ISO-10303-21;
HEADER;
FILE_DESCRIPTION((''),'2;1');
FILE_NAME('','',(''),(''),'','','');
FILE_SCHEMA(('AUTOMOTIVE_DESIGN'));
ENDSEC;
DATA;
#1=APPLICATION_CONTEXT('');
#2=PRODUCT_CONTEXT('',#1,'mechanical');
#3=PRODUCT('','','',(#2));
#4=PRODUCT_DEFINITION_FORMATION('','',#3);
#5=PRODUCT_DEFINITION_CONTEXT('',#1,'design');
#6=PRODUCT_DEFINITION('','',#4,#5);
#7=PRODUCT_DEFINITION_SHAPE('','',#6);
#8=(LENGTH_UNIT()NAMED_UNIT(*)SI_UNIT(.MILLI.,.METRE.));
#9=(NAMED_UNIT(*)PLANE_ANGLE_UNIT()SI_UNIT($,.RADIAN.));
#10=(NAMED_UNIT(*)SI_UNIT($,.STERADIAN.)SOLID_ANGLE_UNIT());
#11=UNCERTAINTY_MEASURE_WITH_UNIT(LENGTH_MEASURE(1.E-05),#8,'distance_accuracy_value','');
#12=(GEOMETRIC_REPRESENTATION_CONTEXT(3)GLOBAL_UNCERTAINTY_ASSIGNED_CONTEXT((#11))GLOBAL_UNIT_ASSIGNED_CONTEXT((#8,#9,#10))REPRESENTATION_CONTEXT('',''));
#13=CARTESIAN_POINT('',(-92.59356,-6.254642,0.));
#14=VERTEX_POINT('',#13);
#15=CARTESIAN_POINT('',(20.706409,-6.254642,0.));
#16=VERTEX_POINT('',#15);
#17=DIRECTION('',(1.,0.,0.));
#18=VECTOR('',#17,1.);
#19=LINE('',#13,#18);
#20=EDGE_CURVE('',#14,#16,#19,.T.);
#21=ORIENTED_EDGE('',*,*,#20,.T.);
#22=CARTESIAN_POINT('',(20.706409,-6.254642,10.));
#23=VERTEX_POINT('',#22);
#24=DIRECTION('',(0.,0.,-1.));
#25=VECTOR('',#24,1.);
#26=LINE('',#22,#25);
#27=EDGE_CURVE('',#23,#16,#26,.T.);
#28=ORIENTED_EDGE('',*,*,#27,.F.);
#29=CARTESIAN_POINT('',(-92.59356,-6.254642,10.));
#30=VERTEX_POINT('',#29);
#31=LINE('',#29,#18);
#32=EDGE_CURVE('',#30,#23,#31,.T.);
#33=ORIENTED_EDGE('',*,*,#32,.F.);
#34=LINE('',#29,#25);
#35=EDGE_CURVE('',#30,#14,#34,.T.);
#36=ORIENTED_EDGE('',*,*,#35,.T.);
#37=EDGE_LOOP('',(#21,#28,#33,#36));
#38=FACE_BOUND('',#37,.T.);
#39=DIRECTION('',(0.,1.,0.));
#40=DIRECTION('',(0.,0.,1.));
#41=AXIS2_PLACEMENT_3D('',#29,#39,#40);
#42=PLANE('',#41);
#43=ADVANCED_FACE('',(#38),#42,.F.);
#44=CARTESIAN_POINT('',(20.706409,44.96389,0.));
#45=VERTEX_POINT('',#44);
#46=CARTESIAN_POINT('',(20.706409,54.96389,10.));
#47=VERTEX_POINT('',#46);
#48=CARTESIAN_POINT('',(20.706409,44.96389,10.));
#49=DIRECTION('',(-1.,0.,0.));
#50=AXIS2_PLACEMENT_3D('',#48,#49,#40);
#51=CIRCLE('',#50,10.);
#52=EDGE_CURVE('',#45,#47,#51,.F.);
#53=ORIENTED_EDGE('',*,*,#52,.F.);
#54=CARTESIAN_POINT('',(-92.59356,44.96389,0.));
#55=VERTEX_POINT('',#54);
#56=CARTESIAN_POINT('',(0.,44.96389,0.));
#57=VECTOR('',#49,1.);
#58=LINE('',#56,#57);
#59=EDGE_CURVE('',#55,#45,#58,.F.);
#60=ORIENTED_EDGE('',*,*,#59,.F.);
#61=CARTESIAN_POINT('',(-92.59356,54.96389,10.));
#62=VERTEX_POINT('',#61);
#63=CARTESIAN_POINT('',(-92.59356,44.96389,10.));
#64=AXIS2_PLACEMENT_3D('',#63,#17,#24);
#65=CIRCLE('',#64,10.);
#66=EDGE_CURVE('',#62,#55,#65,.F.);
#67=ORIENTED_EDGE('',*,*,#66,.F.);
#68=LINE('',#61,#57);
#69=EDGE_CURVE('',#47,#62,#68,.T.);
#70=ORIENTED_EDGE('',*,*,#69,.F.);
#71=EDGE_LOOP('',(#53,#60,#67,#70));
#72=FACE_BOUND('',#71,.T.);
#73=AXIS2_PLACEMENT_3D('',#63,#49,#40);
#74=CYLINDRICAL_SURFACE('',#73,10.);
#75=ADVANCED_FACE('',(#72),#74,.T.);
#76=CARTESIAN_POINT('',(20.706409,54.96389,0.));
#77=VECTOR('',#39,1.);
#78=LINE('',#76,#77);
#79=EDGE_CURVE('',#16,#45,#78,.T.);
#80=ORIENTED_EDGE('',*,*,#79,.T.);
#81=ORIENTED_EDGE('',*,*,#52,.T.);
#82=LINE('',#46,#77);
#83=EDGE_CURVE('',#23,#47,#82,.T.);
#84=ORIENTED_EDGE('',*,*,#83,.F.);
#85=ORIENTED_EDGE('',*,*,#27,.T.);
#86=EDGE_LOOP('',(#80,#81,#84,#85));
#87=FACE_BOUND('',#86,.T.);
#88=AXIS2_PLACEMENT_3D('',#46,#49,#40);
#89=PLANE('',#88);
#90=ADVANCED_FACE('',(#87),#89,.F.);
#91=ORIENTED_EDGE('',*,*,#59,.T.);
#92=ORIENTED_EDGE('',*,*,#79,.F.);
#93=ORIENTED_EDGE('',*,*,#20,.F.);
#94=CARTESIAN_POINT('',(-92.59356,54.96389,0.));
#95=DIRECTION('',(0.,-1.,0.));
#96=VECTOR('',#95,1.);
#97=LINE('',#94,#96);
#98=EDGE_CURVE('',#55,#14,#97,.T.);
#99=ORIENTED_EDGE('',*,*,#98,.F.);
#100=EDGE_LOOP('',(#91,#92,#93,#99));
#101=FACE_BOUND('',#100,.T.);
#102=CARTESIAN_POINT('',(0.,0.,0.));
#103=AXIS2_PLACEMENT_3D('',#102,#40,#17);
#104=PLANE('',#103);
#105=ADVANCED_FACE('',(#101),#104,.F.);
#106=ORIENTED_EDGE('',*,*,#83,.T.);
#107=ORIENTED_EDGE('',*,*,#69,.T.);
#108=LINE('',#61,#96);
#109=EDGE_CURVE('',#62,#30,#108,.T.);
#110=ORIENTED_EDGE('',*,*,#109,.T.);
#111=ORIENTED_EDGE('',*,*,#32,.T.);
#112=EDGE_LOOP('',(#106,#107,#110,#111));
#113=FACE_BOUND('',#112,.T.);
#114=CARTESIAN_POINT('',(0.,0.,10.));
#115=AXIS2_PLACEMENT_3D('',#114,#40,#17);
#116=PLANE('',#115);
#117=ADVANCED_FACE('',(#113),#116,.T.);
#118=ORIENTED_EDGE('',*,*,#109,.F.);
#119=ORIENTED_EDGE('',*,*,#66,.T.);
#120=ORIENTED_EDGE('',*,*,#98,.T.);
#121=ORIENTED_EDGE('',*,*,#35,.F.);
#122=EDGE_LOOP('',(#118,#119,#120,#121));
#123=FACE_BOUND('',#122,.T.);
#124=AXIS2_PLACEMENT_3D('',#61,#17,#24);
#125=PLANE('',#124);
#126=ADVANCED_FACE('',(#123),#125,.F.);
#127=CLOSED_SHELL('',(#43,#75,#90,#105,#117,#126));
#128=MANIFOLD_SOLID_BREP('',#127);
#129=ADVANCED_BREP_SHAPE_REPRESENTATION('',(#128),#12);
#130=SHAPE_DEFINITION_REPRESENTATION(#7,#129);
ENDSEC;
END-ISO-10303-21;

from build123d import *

# Parameters (mm, degrees)
SKETCH8_W           = 113.299968811
SKETCH8_H           = 61.218531535
BOSS_EXTRUDE6_DEPTH = 10
FILLET7_R           = 10


with BuildPart() as part:
    # Sketch8 → Boss-Extrude6 (new body)
    with BuildSketch(Plane.XY):
        with Locations((-35.943575618, 24.354623855)):
            Rectangle(SKETCH8_W, SKETCH8_H)
    extrude(amount=BOSS_EXTRUDE6_DEPTH)

    # Fillet7
    fillet7_edges = [part.edges().sort_by_distance(p)[0] for p in [
        (-35.943575617, 54.963889622, 0),
    ]]
    fillet(fillet7_edges, radius=FILLET7_R - 0.0001)  # a hair under: the kernel refuses the full size


solid = part.part
